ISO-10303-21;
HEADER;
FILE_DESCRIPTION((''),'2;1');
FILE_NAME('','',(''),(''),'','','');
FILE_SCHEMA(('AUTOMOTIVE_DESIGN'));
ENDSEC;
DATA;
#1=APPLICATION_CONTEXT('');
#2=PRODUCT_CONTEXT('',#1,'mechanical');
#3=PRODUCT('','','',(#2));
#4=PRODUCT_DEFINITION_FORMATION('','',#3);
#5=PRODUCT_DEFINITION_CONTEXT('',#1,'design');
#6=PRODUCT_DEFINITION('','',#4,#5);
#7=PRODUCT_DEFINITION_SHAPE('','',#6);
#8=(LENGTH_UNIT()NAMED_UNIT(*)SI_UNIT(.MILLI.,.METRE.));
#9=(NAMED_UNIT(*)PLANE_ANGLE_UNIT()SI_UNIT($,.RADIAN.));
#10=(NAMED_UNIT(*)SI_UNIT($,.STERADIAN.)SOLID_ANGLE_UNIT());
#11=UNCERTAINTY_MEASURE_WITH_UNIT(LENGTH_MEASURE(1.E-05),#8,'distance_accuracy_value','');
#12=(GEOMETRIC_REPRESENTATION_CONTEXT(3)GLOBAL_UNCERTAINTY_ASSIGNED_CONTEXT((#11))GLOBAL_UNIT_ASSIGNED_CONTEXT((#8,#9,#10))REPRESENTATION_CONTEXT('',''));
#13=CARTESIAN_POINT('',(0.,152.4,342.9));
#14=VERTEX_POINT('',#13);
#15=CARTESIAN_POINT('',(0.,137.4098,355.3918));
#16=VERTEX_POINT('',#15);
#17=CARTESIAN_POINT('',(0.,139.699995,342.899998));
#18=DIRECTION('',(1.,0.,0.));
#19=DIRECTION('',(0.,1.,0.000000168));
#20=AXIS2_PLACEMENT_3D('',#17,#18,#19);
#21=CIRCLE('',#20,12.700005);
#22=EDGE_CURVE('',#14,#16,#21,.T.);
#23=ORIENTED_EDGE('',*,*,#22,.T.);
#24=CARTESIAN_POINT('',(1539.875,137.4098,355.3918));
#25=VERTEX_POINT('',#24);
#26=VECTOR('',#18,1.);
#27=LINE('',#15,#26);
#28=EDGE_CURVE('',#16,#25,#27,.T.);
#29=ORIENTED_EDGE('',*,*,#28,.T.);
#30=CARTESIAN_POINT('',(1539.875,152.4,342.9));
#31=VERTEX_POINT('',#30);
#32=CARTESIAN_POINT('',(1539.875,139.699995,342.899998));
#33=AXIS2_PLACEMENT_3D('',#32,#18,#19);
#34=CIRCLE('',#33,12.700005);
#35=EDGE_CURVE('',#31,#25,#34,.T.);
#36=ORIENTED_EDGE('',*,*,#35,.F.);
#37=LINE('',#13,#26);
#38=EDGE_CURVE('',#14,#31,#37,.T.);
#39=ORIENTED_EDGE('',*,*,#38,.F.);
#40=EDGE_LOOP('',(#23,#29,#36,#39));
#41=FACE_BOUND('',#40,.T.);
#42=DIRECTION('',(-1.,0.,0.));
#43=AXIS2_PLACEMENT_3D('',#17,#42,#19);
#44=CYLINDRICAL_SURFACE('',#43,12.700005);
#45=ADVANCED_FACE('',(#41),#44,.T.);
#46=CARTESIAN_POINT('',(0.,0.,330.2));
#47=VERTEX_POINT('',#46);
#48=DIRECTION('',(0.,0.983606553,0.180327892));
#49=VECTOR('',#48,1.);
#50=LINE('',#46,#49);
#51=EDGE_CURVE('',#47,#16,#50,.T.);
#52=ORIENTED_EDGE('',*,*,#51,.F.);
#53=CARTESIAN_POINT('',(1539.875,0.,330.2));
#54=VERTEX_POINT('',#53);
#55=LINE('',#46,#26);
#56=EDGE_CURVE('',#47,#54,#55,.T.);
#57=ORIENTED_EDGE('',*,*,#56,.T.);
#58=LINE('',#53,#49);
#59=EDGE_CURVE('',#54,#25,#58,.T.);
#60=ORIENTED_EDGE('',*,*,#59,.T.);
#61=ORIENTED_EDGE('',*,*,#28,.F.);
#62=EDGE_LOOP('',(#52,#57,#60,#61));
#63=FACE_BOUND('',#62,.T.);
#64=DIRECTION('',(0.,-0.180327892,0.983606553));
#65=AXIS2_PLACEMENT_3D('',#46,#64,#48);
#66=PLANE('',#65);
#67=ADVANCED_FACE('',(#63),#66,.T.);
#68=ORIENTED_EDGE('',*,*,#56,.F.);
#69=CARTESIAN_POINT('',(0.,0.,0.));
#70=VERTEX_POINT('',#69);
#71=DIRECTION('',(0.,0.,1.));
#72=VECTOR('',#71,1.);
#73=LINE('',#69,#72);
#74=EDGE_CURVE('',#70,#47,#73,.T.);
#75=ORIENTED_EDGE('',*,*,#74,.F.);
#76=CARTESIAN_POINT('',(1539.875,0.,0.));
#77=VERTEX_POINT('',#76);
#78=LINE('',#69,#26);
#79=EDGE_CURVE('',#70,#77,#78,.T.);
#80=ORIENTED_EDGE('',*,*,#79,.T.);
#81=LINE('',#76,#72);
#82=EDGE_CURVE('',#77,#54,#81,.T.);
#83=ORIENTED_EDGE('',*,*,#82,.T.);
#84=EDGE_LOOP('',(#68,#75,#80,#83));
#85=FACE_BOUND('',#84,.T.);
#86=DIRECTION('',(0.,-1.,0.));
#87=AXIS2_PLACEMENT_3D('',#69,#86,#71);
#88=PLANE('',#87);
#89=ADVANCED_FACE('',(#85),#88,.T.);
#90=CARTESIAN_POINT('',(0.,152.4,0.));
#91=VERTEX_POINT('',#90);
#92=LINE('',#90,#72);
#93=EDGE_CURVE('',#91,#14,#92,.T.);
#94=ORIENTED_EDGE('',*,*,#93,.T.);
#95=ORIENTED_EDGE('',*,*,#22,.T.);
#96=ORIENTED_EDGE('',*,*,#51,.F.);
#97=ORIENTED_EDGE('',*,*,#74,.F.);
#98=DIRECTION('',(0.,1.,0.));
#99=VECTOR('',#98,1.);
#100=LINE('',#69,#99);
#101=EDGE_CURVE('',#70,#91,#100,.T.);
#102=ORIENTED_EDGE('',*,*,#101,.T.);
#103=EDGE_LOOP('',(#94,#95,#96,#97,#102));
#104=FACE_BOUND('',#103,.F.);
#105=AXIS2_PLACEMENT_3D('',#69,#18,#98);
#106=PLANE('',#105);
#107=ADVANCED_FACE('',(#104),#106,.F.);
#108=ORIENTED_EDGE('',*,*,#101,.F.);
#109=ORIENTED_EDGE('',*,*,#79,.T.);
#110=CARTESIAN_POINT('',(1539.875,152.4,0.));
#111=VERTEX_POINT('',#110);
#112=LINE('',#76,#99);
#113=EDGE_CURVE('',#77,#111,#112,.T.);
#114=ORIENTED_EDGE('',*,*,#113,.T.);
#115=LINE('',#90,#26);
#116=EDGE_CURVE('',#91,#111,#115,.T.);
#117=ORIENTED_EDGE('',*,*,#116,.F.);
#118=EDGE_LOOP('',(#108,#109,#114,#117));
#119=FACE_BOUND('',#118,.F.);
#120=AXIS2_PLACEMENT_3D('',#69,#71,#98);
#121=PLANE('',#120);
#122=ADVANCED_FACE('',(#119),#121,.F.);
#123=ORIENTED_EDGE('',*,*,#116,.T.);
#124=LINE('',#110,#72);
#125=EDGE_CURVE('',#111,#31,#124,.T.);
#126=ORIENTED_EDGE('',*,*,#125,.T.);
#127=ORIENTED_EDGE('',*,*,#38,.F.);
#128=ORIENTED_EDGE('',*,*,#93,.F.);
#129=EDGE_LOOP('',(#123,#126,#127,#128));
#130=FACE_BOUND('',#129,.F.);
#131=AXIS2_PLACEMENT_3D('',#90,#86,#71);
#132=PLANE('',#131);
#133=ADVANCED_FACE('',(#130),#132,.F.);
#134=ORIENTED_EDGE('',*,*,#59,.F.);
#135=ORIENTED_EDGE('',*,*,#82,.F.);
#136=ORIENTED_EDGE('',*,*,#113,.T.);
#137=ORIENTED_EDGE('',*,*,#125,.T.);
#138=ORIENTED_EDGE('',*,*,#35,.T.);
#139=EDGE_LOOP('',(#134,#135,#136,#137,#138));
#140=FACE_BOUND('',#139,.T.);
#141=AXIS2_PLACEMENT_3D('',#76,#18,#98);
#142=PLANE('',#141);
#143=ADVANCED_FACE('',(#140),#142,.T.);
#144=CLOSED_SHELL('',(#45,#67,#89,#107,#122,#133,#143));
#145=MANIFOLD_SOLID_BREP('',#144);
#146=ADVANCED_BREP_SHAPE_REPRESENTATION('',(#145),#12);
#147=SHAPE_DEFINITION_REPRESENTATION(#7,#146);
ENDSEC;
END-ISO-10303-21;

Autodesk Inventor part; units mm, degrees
ref_plane "YZ Plane" through (0, 0, 0) normal (1, 0, 0) x (0, 1, 0)
ref_plane "XZ Plane" through (0, 0, 0) normal (0, 1, 0) x (-1, 0, 0)
ref_plane "XY Plane" through (0, 0, 0) normal (0, 0, 1) x (1, 0, 0)
sketch "Profile" plane through (0, 0, 0) normal (0, 0, 1) x (1, 0, 0)
  line L0 (0, 0) -> (0, 330.2)
  line L1 (0, 0) -> (152.4, 0)
  line L2 (152.4, 0) -> (152.4, 342.9)
  line L3 (152.4, 342.9) -> (139.7, 342.9) construction
  line L4 (152.4, 342.9) -> (139.7, 342.9) construction
  arc A0 (152.4, 342.9) -> (137.4098, 355.3918) centre (139.7, 342.9) ccw
  line L5 (0, 330.2) -> (137.4098, 355.3918)
  dimension "d0" = 330.2
  dimension "d1" = 152.4
  dimension "d2" = 342.9
  dimension "d3" = 12.7
  dimension "d4" = 12.7
sketch "Sketch1" plane through (0, 0, 0) normal (1, 0, 0) x (0, 1, 0)
  line L0 (0, 0) -> (0, 330.2)
  line L1 (0, 0) -> (152.4, 0)
  line L2 (152.4, 0) -> (152.4, 342.9)
  line L3 (152.4, 342.9) -> (139.7, 342.9) construction
  line L4 (152.4, 342.9) -> (139.7, 342.9) construction
  arc A0 (152.4, 342.9) -> (137.4098, 355.3918) centre (139.7, 342.9) ccw
  line L5 (0, 330.2) -> (137.4098, 355.3918)
extrude "Extrusion1" add sketch "Sketch1" along normal blind 1539.875
properties part number "P" material "Granite, Cut, Polished"
